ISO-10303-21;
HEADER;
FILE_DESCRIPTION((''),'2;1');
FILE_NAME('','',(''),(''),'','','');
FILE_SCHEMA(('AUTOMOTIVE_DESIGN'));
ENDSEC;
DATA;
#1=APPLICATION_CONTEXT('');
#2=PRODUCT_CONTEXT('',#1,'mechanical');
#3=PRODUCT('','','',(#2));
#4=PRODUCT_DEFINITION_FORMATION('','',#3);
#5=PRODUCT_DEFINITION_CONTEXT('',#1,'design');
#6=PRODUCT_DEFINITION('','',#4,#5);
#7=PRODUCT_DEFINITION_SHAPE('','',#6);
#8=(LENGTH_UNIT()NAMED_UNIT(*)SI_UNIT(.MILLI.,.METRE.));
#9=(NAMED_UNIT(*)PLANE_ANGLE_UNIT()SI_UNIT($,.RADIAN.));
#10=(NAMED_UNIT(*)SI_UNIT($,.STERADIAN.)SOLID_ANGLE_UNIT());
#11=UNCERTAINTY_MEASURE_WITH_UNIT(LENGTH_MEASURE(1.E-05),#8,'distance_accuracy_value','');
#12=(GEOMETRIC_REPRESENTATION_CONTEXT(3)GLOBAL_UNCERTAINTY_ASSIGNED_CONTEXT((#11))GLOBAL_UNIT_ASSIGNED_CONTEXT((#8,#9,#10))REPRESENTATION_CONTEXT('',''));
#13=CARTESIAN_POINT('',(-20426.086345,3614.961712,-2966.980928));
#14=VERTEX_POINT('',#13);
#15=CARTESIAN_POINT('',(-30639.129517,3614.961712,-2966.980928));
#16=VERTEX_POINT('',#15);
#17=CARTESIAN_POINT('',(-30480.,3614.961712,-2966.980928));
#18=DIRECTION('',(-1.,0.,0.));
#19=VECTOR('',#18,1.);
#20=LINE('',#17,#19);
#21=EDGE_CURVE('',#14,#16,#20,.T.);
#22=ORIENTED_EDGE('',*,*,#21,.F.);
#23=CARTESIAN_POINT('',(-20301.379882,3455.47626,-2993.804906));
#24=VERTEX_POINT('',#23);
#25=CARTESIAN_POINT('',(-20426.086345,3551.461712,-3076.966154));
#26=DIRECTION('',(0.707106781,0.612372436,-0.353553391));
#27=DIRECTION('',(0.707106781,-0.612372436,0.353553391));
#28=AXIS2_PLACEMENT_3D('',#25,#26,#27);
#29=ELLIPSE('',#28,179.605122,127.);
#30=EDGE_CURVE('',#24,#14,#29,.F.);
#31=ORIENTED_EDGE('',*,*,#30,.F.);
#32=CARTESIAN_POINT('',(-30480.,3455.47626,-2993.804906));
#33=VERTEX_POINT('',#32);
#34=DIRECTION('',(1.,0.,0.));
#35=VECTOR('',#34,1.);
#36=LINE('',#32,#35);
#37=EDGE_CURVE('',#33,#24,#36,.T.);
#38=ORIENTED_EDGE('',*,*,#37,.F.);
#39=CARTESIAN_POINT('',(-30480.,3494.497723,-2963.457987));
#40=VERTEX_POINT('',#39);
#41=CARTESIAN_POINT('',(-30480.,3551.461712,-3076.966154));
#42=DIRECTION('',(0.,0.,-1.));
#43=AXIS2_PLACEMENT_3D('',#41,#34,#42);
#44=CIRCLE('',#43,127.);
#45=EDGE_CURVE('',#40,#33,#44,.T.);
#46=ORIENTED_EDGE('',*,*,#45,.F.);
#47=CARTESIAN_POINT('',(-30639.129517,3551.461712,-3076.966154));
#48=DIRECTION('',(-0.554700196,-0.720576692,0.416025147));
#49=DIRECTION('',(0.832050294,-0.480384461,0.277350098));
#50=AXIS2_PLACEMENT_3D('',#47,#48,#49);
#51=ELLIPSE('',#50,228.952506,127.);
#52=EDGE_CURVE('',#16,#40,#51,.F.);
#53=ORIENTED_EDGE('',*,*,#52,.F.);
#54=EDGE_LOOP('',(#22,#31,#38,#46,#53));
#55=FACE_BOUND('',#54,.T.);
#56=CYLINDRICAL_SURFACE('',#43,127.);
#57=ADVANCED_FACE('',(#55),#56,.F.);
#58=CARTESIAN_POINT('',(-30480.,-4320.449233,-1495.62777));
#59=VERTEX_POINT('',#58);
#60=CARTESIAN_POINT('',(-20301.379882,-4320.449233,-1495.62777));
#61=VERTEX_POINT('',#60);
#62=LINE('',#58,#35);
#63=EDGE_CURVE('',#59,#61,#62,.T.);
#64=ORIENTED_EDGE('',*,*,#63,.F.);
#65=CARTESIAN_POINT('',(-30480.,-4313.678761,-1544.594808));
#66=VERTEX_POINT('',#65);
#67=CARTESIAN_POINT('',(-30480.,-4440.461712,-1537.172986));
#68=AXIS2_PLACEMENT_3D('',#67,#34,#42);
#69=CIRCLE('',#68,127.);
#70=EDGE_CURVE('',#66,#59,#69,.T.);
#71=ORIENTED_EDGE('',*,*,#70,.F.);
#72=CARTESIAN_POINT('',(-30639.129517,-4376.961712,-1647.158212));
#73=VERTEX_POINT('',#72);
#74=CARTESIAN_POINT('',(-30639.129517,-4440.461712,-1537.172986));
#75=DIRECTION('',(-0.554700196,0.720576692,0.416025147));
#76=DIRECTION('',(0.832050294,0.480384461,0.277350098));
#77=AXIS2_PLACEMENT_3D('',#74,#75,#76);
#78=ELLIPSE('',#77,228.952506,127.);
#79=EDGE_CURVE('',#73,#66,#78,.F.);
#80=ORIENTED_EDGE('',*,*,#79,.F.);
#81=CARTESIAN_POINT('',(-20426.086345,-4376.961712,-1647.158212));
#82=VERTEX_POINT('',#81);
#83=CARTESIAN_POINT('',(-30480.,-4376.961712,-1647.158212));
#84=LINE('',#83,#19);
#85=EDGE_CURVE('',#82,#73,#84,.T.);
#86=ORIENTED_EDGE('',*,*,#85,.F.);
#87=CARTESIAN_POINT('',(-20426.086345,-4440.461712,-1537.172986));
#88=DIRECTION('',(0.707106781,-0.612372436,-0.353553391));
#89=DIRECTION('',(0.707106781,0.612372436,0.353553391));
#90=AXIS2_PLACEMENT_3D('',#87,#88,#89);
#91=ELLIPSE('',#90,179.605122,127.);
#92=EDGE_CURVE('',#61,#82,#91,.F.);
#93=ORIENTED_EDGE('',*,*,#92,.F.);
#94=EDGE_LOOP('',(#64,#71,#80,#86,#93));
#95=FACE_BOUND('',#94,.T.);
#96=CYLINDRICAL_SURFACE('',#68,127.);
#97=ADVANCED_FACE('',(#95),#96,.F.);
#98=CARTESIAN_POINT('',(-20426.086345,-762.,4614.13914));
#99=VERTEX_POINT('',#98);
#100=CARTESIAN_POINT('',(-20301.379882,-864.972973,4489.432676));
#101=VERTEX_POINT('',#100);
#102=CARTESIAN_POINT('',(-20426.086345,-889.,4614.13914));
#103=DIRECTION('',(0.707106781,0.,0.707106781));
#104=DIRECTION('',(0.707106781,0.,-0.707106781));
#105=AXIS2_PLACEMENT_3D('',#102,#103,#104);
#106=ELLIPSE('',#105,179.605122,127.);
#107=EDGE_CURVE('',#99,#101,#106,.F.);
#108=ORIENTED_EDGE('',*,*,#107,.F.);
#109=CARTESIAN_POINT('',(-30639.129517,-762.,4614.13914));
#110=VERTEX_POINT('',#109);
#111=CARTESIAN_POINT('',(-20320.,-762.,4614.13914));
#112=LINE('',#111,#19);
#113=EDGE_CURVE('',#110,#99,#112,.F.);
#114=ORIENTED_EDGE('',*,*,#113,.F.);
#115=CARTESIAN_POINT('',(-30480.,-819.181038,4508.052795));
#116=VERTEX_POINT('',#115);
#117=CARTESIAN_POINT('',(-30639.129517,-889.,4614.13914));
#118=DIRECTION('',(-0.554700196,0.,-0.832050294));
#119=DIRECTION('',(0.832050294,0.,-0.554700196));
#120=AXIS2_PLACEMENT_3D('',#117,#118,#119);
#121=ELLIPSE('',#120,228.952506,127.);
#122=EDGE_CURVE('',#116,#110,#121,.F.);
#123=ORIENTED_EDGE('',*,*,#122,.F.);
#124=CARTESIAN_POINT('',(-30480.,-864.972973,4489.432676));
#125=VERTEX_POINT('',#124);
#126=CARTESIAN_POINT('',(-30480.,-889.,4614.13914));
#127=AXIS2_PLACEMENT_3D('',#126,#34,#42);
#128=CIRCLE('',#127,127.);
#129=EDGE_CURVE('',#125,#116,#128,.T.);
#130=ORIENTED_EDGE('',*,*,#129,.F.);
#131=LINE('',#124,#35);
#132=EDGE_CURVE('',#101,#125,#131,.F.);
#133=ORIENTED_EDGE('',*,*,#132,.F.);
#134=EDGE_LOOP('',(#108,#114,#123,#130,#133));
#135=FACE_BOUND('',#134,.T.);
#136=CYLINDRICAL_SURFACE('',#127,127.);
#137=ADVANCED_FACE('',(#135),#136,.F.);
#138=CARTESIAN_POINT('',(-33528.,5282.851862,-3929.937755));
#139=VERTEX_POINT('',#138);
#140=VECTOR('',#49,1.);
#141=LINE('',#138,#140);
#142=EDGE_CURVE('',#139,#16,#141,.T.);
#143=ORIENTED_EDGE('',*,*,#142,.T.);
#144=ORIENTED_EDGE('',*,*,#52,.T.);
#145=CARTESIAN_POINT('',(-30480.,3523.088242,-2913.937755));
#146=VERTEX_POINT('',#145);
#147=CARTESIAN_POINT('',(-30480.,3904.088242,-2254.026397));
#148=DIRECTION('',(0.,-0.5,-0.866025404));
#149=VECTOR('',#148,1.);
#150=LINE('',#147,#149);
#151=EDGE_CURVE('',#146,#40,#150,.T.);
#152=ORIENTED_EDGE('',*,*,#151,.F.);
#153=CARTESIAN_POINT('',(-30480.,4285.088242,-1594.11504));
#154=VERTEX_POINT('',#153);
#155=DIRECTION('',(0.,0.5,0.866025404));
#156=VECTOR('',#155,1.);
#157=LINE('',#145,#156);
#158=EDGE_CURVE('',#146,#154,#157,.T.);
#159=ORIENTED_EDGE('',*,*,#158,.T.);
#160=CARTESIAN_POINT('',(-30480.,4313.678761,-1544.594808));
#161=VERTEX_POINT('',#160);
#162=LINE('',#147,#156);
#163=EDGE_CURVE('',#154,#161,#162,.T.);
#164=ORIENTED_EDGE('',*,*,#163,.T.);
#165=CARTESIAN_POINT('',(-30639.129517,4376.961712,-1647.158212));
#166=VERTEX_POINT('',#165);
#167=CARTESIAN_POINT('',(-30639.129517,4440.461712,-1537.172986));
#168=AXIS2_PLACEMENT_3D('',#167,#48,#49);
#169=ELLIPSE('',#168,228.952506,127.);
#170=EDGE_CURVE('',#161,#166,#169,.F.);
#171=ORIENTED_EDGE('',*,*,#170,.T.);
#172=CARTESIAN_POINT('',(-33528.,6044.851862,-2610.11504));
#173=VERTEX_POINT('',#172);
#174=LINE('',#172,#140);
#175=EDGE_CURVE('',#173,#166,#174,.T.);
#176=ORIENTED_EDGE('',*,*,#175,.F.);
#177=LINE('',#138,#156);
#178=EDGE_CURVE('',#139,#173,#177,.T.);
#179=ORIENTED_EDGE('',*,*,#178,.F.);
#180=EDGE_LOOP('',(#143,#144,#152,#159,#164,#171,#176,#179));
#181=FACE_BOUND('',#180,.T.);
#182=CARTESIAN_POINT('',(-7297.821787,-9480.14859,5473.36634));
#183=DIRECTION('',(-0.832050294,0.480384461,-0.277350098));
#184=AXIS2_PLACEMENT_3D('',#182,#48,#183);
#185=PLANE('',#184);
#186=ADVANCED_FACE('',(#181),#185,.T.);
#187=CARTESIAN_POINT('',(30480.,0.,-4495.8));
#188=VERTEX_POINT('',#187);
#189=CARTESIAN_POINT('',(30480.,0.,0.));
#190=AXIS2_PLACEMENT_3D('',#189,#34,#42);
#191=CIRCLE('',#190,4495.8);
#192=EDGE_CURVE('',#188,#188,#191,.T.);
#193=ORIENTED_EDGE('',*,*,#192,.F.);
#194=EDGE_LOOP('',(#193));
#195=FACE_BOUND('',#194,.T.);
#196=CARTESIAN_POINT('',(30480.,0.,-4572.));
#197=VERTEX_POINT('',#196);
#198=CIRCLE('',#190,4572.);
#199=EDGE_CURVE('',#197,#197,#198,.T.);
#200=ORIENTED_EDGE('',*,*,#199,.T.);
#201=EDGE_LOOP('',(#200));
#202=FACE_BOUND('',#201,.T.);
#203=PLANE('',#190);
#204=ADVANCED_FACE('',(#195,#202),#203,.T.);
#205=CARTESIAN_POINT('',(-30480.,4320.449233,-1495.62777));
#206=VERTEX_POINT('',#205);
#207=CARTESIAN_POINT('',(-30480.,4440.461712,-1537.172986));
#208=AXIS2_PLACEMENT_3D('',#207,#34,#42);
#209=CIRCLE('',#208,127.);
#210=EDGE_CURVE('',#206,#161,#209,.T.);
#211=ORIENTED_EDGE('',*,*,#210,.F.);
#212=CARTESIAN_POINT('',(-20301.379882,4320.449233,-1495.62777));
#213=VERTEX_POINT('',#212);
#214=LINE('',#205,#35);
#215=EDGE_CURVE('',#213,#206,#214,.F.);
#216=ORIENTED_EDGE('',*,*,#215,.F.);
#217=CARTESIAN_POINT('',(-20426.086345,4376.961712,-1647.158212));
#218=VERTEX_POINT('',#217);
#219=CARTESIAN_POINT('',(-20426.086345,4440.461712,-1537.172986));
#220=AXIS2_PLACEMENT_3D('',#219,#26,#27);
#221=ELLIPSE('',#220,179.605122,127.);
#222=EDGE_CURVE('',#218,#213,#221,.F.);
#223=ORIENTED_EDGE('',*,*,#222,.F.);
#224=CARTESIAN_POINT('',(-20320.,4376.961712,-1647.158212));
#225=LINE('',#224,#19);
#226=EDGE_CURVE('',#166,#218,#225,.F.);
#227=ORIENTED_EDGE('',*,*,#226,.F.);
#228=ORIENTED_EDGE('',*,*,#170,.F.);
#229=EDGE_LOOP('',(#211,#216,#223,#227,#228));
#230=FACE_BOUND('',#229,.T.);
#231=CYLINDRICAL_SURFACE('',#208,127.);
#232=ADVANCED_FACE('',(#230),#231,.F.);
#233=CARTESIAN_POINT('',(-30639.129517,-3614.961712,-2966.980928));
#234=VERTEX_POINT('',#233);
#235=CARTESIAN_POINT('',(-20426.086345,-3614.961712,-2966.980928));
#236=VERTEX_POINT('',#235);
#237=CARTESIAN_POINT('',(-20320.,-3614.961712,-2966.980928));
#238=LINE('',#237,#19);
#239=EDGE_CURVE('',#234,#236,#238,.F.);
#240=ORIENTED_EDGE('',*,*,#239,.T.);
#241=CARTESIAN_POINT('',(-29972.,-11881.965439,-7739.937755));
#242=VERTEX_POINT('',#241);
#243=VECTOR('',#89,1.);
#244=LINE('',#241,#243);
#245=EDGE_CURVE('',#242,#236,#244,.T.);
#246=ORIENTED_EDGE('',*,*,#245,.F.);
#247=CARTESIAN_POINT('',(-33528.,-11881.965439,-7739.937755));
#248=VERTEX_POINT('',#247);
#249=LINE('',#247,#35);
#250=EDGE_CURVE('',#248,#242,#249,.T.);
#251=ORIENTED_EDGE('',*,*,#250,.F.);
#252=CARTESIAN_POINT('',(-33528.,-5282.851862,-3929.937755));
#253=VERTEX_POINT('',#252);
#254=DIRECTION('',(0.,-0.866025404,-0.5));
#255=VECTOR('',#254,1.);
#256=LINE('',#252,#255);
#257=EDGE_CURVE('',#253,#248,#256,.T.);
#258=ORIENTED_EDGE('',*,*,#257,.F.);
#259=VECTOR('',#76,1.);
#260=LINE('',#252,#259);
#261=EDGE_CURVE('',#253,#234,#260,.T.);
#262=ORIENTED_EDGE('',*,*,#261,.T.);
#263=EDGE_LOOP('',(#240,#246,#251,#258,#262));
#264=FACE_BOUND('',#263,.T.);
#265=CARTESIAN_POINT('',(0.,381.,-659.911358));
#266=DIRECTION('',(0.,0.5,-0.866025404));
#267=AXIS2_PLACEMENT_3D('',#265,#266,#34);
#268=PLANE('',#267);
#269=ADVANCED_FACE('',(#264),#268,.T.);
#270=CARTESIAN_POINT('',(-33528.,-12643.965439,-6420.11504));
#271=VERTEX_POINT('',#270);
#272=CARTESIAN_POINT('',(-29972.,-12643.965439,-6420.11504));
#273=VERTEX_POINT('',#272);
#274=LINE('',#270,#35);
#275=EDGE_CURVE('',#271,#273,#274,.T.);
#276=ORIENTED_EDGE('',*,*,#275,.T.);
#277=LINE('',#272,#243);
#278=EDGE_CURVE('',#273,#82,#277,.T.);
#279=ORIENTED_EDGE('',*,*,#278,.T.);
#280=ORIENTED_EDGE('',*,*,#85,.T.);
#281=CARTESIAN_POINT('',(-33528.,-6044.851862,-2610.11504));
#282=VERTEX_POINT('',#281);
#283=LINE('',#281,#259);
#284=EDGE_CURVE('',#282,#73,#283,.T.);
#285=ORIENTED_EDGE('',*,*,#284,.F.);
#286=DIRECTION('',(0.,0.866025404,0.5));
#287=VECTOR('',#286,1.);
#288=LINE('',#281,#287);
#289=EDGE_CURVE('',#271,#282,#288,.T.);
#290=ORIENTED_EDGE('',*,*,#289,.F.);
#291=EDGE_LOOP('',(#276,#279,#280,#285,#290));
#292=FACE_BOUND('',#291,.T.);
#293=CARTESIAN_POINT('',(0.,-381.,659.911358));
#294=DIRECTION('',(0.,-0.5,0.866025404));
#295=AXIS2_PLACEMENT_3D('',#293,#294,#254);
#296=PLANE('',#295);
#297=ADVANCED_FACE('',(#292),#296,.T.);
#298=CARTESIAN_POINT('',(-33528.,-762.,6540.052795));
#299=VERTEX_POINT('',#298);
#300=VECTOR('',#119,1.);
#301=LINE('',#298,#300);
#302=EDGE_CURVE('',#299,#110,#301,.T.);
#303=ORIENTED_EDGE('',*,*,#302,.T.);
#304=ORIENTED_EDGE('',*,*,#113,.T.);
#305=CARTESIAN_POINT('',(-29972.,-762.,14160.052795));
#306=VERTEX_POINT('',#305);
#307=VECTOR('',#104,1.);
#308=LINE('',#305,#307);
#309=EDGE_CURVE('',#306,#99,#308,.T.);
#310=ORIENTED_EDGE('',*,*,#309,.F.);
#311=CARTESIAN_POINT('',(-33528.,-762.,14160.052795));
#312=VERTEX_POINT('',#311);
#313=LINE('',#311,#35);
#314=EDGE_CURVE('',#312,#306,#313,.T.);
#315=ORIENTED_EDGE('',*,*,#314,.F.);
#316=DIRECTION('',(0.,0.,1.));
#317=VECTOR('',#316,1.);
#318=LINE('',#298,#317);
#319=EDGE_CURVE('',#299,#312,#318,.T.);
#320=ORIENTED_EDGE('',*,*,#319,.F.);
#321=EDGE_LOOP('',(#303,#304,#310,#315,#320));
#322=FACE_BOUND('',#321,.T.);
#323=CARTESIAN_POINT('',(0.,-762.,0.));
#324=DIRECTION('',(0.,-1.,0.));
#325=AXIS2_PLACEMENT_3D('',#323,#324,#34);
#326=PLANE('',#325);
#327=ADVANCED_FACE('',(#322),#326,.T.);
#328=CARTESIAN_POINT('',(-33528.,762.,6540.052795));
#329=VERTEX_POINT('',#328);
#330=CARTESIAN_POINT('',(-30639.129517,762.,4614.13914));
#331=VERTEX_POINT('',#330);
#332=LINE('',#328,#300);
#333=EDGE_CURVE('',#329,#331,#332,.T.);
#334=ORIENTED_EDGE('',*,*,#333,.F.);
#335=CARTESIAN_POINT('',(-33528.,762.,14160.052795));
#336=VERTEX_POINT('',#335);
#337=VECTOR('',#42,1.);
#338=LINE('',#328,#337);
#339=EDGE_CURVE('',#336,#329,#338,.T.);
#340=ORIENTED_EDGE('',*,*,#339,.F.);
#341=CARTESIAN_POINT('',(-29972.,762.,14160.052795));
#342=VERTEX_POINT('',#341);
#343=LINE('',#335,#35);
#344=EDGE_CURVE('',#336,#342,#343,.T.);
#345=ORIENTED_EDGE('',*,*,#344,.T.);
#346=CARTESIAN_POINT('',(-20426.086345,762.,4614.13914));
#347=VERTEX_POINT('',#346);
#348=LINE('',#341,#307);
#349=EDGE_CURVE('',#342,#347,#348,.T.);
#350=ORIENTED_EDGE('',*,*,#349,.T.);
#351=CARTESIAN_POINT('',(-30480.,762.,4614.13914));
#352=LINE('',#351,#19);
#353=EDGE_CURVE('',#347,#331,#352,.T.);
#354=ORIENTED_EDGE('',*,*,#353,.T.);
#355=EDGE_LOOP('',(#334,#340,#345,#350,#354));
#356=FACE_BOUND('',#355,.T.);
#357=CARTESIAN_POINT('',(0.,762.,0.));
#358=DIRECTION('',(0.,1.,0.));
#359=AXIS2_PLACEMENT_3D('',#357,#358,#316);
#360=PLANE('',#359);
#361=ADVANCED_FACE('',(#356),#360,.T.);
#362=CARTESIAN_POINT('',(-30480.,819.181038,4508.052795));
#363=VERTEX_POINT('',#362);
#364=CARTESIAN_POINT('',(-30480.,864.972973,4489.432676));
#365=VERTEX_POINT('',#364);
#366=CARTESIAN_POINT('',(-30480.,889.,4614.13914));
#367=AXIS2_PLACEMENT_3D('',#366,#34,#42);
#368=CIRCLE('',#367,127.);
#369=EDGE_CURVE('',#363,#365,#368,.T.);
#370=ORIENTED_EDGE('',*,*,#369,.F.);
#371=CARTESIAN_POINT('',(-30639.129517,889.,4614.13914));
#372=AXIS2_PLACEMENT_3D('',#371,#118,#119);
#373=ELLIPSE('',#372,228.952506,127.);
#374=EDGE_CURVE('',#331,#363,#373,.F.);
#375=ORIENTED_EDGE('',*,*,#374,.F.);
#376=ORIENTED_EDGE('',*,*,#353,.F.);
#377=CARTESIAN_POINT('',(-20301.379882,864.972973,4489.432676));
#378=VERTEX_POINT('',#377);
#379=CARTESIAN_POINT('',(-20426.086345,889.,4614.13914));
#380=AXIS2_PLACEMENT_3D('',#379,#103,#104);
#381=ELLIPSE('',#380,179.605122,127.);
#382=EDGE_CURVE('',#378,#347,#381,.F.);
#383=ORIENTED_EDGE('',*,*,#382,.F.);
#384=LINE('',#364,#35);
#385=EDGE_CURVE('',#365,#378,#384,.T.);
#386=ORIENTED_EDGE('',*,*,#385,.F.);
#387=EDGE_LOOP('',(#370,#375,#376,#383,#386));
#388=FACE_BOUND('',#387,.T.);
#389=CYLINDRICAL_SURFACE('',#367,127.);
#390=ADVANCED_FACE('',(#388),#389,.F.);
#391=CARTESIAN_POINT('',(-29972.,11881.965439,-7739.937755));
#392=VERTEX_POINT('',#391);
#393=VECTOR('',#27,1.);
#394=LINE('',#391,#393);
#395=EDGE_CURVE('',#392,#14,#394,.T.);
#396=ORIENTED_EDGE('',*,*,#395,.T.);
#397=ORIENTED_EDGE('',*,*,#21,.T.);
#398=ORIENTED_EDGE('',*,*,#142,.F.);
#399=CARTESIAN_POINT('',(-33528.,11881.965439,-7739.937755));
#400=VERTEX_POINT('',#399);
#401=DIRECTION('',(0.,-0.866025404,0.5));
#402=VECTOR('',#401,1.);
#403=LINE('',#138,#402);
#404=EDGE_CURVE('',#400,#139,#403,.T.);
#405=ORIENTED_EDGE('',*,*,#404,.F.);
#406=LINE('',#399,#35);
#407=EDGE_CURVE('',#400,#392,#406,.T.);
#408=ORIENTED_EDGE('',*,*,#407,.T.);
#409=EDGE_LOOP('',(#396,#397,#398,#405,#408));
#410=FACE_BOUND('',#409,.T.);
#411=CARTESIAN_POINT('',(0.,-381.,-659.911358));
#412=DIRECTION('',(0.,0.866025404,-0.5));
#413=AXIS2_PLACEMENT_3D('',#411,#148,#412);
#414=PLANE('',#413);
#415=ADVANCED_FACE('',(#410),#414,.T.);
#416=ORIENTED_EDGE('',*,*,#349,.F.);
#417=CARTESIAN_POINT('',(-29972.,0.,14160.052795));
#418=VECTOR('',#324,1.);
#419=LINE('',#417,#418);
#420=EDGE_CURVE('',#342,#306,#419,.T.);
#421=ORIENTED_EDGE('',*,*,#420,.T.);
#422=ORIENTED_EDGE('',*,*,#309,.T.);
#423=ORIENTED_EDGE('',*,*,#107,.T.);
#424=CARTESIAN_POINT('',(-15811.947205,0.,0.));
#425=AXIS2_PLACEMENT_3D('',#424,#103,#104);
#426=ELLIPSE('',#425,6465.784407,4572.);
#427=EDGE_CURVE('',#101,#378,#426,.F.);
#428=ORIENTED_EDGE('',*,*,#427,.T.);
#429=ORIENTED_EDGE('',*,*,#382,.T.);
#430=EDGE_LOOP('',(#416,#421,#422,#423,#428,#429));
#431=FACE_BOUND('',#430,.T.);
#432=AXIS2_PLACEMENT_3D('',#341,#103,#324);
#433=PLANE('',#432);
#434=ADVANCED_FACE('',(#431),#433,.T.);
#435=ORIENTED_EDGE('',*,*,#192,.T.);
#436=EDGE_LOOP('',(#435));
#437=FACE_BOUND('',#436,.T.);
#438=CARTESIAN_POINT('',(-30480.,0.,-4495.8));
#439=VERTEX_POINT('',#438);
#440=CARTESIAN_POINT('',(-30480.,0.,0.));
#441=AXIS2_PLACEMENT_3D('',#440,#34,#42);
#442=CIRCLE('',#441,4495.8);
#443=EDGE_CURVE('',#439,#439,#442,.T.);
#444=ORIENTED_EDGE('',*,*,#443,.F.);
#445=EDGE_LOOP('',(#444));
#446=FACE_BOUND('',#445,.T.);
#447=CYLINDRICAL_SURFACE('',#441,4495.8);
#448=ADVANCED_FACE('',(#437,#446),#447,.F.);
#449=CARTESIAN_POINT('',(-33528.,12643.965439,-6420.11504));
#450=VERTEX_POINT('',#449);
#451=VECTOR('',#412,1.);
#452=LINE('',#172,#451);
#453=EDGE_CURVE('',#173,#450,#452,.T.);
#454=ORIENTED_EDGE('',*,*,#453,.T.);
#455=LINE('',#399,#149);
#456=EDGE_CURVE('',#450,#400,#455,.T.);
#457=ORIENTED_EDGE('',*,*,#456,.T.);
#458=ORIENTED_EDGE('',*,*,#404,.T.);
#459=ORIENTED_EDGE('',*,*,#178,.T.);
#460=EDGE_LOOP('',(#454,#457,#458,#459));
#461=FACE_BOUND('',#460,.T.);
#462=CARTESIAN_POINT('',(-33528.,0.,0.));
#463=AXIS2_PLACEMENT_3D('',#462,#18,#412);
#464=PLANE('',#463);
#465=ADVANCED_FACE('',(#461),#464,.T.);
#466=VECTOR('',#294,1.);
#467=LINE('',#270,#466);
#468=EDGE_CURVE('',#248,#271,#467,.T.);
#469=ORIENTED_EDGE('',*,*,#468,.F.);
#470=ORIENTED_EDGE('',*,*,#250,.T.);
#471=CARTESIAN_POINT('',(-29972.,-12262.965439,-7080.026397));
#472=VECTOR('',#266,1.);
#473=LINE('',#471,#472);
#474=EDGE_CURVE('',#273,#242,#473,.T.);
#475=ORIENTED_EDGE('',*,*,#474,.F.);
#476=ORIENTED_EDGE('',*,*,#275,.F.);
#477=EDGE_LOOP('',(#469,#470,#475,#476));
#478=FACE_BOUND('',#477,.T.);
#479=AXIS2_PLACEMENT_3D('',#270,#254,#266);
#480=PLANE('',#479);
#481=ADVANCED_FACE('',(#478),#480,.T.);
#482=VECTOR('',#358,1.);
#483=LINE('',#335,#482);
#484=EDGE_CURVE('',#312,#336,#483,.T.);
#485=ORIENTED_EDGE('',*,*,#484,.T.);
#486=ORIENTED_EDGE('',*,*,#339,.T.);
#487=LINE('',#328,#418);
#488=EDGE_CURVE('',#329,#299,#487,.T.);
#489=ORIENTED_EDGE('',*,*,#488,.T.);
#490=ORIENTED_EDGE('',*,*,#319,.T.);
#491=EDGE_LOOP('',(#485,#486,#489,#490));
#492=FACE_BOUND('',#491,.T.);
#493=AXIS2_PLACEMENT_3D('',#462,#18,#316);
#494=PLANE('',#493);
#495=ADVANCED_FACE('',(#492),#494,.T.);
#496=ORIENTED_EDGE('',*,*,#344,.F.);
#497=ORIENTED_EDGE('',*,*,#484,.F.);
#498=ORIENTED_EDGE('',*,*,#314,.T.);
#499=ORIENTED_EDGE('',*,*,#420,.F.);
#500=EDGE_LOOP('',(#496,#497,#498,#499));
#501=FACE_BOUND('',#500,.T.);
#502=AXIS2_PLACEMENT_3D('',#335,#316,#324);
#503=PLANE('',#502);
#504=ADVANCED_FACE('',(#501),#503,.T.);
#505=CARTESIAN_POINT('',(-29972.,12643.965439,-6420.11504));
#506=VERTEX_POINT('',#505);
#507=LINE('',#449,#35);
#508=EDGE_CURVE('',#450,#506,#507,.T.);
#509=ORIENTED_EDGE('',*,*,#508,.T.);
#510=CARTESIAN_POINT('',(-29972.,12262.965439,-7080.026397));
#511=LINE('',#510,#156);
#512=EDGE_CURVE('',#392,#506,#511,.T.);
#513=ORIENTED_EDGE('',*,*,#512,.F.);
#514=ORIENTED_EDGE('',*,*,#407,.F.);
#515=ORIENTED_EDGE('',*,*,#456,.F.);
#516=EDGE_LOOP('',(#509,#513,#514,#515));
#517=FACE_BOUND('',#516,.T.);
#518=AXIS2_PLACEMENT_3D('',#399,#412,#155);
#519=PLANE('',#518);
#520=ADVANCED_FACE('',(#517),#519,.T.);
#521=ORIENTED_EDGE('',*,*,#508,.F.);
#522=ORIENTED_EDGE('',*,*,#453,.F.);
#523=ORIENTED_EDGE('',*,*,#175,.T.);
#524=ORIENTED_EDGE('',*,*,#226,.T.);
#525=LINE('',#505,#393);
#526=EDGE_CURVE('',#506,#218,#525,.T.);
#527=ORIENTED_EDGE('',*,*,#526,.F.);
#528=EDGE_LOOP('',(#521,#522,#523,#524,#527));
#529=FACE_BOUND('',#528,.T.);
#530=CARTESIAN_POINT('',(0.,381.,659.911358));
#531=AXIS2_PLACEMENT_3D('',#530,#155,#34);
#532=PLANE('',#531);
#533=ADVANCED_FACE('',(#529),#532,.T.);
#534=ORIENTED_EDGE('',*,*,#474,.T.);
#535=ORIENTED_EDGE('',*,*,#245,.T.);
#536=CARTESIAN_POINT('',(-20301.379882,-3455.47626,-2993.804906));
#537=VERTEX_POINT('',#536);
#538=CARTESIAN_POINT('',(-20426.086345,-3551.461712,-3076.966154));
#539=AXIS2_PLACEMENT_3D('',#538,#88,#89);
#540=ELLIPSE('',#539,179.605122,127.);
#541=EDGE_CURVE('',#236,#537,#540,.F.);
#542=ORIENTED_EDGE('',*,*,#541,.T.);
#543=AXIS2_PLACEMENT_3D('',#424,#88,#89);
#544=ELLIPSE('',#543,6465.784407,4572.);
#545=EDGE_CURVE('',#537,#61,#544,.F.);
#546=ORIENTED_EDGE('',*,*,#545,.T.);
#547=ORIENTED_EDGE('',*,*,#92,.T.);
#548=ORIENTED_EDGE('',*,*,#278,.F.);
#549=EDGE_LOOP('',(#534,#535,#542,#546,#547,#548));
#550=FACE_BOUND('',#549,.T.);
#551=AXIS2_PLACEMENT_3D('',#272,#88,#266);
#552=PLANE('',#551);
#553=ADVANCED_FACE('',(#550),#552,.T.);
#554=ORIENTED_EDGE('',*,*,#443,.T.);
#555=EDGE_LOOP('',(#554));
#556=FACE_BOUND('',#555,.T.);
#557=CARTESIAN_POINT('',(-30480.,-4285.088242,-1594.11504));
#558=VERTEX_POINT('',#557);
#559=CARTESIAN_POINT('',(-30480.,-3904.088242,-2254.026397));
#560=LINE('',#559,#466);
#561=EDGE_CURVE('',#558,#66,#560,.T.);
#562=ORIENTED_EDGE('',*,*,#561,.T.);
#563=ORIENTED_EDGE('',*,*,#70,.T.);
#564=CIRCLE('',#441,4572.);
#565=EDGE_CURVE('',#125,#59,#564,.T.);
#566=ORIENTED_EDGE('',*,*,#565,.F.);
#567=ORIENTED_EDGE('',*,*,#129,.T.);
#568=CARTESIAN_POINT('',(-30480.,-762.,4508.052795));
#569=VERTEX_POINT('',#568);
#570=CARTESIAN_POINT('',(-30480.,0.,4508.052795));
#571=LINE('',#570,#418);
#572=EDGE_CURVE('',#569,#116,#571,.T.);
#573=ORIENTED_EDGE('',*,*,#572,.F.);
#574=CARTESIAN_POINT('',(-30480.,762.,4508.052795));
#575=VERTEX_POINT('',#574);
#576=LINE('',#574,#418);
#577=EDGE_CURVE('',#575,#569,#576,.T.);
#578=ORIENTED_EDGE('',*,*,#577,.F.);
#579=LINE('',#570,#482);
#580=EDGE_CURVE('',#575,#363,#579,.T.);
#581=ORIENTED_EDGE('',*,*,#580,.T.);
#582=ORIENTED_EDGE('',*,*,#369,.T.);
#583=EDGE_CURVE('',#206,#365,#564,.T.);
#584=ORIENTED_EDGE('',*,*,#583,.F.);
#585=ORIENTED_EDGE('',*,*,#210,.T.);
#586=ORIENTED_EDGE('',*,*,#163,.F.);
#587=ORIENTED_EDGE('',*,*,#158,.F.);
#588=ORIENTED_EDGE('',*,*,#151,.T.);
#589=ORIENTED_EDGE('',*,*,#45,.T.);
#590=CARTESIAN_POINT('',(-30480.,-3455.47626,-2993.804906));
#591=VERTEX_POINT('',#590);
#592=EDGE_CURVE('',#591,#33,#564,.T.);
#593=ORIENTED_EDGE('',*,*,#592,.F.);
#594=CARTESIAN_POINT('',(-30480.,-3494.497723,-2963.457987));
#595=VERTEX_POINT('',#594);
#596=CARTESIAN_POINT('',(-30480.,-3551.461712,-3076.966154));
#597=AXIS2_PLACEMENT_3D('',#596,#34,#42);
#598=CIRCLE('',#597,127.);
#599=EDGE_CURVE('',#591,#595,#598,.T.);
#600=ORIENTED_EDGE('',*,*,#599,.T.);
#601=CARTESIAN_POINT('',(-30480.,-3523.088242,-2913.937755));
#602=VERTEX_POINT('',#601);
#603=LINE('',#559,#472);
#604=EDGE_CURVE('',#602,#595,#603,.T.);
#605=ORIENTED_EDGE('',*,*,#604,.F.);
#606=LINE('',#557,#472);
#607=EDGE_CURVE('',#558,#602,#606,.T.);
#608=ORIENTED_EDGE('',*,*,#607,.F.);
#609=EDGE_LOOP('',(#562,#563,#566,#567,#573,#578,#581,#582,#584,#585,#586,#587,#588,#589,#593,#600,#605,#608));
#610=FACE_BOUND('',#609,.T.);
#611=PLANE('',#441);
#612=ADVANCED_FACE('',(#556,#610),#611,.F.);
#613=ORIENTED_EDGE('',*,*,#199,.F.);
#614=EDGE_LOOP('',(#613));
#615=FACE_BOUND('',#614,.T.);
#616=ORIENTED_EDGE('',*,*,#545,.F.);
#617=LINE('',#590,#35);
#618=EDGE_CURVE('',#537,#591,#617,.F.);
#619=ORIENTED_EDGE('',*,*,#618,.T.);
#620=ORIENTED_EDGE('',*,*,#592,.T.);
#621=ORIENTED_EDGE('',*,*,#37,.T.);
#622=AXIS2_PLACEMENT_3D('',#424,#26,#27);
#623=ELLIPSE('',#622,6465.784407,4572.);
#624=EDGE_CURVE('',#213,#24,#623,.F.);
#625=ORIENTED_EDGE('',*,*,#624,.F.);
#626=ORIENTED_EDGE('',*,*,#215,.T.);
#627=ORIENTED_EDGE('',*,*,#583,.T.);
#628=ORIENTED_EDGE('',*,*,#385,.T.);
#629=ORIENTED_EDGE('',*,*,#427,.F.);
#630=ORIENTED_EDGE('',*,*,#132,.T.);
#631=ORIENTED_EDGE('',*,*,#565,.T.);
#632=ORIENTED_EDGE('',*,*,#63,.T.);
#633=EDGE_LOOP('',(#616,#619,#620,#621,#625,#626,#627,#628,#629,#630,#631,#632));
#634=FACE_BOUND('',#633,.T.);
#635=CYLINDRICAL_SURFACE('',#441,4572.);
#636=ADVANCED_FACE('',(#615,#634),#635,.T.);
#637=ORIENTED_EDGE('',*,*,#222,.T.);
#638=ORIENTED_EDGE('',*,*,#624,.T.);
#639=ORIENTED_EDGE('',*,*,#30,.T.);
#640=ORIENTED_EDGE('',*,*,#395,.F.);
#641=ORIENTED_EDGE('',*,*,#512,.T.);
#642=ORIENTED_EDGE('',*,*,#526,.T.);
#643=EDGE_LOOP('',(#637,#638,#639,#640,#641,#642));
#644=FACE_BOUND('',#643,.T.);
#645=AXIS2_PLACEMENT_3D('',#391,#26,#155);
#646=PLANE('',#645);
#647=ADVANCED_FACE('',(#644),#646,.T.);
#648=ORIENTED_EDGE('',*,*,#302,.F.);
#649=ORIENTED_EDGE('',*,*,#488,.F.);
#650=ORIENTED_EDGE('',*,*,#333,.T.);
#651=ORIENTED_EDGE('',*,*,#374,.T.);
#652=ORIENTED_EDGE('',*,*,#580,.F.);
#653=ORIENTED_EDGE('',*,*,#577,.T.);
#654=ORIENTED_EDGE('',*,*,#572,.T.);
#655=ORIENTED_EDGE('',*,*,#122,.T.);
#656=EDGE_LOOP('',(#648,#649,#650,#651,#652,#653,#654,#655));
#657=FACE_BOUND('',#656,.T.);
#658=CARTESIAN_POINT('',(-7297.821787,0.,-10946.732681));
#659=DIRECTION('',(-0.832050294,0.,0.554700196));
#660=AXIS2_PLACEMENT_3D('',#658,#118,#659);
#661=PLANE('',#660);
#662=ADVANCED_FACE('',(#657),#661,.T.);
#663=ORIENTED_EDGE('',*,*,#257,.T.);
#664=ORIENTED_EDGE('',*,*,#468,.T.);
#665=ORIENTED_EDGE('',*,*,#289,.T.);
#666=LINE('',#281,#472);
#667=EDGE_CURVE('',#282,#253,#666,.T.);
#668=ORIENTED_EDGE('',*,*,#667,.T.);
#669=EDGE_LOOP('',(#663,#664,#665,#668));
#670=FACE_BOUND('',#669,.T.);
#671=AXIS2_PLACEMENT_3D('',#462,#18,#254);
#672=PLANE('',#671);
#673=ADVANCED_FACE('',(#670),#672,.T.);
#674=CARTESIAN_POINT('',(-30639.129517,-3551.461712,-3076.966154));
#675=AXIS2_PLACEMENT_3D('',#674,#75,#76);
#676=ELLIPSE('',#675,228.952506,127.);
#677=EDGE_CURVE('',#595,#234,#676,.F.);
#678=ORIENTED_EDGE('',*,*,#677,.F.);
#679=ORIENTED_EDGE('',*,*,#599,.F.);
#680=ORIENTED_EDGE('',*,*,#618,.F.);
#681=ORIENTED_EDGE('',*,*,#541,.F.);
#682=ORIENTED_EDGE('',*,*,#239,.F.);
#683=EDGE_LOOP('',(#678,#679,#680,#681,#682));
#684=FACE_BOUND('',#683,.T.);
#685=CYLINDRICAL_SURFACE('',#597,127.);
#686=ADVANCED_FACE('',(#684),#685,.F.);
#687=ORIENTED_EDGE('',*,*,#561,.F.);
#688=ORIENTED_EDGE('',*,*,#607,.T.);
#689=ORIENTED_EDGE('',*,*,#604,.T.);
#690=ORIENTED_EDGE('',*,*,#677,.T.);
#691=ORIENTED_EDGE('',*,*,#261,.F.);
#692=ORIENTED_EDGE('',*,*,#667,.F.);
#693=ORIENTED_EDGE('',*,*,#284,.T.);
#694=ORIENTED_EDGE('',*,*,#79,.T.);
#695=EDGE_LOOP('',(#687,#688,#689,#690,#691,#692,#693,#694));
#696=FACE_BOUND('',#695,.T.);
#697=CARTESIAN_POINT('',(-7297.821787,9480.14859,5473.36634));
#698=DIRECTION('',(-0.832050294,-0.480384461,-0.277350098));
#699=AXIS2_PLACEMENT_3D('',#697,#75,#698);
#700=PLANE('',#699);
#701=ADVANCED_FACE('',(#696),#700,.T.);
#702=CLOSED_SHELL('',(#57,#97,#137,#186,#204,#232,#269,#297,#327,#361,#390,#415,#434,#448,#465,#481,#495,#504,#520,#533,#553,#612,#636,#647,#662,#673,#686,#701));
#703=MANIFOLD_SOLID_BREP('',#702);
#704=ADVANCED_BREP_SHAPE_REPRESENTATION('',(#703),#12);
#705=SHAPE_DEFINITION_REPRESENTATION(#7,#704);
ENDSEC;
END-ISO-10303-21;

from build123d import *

# Parameters (mm, degrees)
BOSS_EXTRUDE1_DEPTH      = 30480
BOSS_EXTRUDE1_DEPTH_BACK = 30480
SKETCH1_R                = 4572
SHELL1_T                 = -76.2
LOFT2_START              = -762
LOFT2_DEPTH              = 1524
FILLET1_R                = 127
CIRPATTERN1_COUNT        = 3
FILLET1_OF_CIRPATTERN1_R = 127


# Read off the part's stored shape, not the designer's step: Loft2
with BuildPart() as part:
    # Sketch1 → Boss-Extrude1 (new, two sides: drawn at the far end of the back side and taken through both)
    with BuildSketch(Plane(origin=(0, 0, 0), x_dir=(0, 0, -1), z_dir=(1, 0, 0)).offset(-BOSS_EXTRUDE1_DEPTH_BACK)):
        Circle(SKETCH1_R)
    extrude(amount=BOSS_EXTRUDE1_DEPTH + BOSS_EXTRUDE1_DEPTH_BACK)

    # Shell1
    shell1_openings = [part.faces().sort_by_distance(p)[0] for p in [
        (-30480, 0, 0),
        (30480, 0, 0),
    ]]
    offset(amount=SHELL1_T, openings=shell1_openings, kind=Kind.INTERSECTION)

    # Loft2 outline → Loft2 (add)
    with BuildSketch(Plane(origin=(0, 0, 0), x_dir=(1, 0, 0), z_dir=(0, 1, 0)).offset(LOFT2_START)):
        Polygon((-30478.420807917, -4507), (-33528, -6540.052794722), (-33528, -14160.052794722), (-29972, -14160.052794722), (-20318.947205278, -4507), align=None)
    loft2 = extrude(amount=LOFT2_DEPTH)

    # Fillet1
    # the kernel refuses this fillet: 127 mm, written as the material it adds along each edge
    with BuildSketch(Plane(origin=(-30745.215862307, 762, 4508.052794722), x_dir=(0, 0.9840414147079701, -0.1779395800251785), z_dir=(1, 0, 0))) as fillet1_piece_1_section:
        with BuildLine():
            CenterArc((106.096300006, 126.991683602), FILLET1_R, 190.249769112, 79.094530003)
            Line((-18.876959662, 104.393356939), (0, 0))
            ThreePointArc((0, 0), (52.321463017, 0.299390324), (104.642926033, 0))
        make_face()
    fillet1_piece_1 = extrude(amount=10690.431724613, mode=Mode.PRIVATE)
    fillet1_piece_1 = split(fillet1_piece_1, bisect_by=Plane(origin=(-30480, 769.527173965, 4556.423529059), z_dir=(-1, 0, 0)), keep=Keep.TOP, mode=Mode.PRIVATE)
    fillet1_piece_1 = split(fillet1_piece_1, bisect_by=Plane(origin=(-30527.440527907, 769.527173965, 4539.679813327), z_dir=(0.5547001962252289, 0, 0.8320502943378439)), keep=Keep.TOP, mode=Mode.PRIVATE)
    add(fillet1_piece_1)
    with BuildSketch(Plane(origin=(-30480, 762, 4508.052794722), x_dir=(0, 0.9840414147079701, -0.17793958002517812), z_dir=(1, 0, 0))) as fillet1_piece_2_section:
        with BuildLine():
            CenterArc((106.096300006, 126.991683602), FILLET1_R, 190.249769112, 79.094530003)
            Line((-18.876959662, 104.393356939), (0, 0))
            ThreePointArc((0, 0), (52.321463017, 0.299390324), (104.642926033, 0))
        make_face()
    fillet1_piece_2 = extrude(amount=10425.215862307, mode=Mode.PRIVATE)
    fillet1_piece_2 = split(fillet1_piece_2, bisect_by=Plane(origin=(-30469.277434704, 825.457396933, 4500.904417858), z_dir=(-0.5547001962252289, 0, -0.8320502943378439)), keep=Keep.TOP, mode=Mode.PRIVATE)
    add(fillet1_piece_2)
    with BuildSketch(Plane(origin=(-30480, 762, 4508.052794722), x_dir=(0, 0.9840414147079701, -0.17793958002517812), z_dir=(1, 0, 0))) as fillet1_piece_3_section:
        with BuildLine():
            CenterArc((106.096300006, 126.991683602), FILLET1_R, 190.249769112, 79.094530003)
            Line((-18.876959662, 104.393356939), (0, 0))
            ThreePointArc((0, 0), (52.321463017, 0.299390324), (104.642926033, 0))
        make_face()
    fillet1_piece_3 = extrude(amount=10425.215862307, mode=Mode.PRIVATE)
    fillet1_piece_3 = split(fillet1_piece_3, bisect_by=Plane(origin=(-22874.041619901, 784.931098552, 7062.094414623), z_dir=(-0.7071067811865476, 0, -0.7071067811865476)), keep=Keep.TOP, mode=Mode.PRIVATE)
    fillet1_piece_3 = split(fillet1_piece_3, bisect_by=Plane(origin=(-26977.987627207, 784.931098552, 2173.377879526), z_dir=(0.5547001962252289, 0, 0.8320502943378439)), keep=Keep.TOP, mode=Mode.PRIVATE)
    add(fillet1_piece_3)
    with BuildSketch(Plane(origin=(-30745.215862307, -762, 4508.052794722), x_dir=(0, -0.9840414147079707, -0.17793958002517546), z_dir=(1, 0, 0))) as fillet1_piece_4_section:
        with BuildLine():
            CenterArc((106.096300006, -126.991683602), FILLET1_R, 90.655700885, 79.094530003)
            Line((-18.876959662, -104.393356939), (0, 0))
            ThreePointArc((0, 0), (52.321463017, -0.299390324), (104.642926033, 0))
        make_face()
    fillet1_piece_4 = extrude(amount=10690.431724613, mode=Mode.PRIVATE)
    fillet1_piece_4 = split(fillet1_piece_4, bisect_by=Plane(origin=(-30480, -769.527173965, 4556.423529059), z_dir=(-1, 0, 0)), keep=Keep.TOP, mode=Mode.PRIVATE)
    fillet1_piece_4 = split(fillet1_piece_4, bisect_by=Plane(origin=(-30527.440527907, -769.527173965, 4539.679813327), z_dir=(0.5547001962252289, 0, 0.8320502943378439)), keep=Keep.TOP, mode=Mode.PRIVATE)
    add(fillet1_piece_4)
    with BuildSketch(Plane(origin=(-30480, -762, 4508.052794722), x_dir=(0, -0.9840414147079704, -0.1779395800251768), z_dir=(1, 0, 0))) as fillet1_piece_5_section:
        with BuildLine():
            CenterArc((106.096300006, -126.991683602), FILLET1_R, 90.655700885, 79.094530003)
            Line((-18.876959662, -104.393356939), (0, 0))
            ThreePointArc((0, 0), (52.321463017, -0.299390324), (104.642926033, 0))
        make_face()
    fillet1_piece_5 = extrude(amount=10425.215862307, mode=Mode.PRIVATE)
    fillet1_piece_5 = split(fillet1_piece_5, bisect_by=Plane(origin=(-30469.277434704, -825.457396933, 4500.904417858), z_dir=(-0.5547001962252289, 0, -0.8320502943378439)), keep=Keep.TOP, mode=Mode.PRIVATE)
    add(fillet1_piece_5)
    with BuildSketch(Plane(origin=(-30480, -762, 4508.052794722), x_dir=(0, -0.9840414147079704, -0.1779395800251768), z_dir=(1, 0, 0))) as fillet1_piece_6_section:
        with BuildLine():
            CenterArc((106.096300006, -126.991683602), FILLET1_R, 90.655700885, 79.094530003)
            Line((-18.876959662, -104.393356939), (0, 0))
            ThreePointArc((0, 0), (52.321463017, -0.299390324), (104.642926033, 0))
        make_face()
    fillet1_piece_6 = extrude(amount=10425.215862307, mode=Mode.PRIVATE)
    fillet1_piece_6 = split(fillet1_piece_6, bisect_by=Plane(origin=(-22874.041619901, -784.931098552, 7062.094414623), z_dir=(-0.7071067811865476, 0, -0.7071067811865476)), keep=Keep.TOP, mode=Mode.PRIVATE)
    fillet1_piece_6 = split(fillet1_piece_6, bisect_by=Plane(origin=(-26977.987627207, -784.931098552, 2173.377879526), z_dir=(0.5547001962252289, 0, 0.8320502943378439)), keep=Keep.TOP, mode=Mode.PRIVATE)
    add(fillet1_piece_6)

    # CirPattern1: Loft2 ×3 about axis
    cirpattern1_axis = Axis((0, 0, 0), (1, 0, 0))
    for i in range(1, CIRPATTERN1_COUNT):
        add(loft2.rotate(cirpattern1_axis, i * 360 / CIRPATTERN1_COUNT))

    # Fillet1 of CirPattern1
    # the kernel refuses this fillet: 127 mm, written as the material it adds along each edge
    with BuildSketch(Plane(origin=(-20054.784137693, -4285.088241831, -1594.115039677), x_dir=(0, -0.33792051071345414, 0.9411746535256664), z_dir=(-1, 0, 0))) as fillet1_of_cirpattern1_piece_1_section:
        with BuildLine():
            CenterArc((106.096300006, -126.991683602), FILLET1_OF_CIRPATTERN1_R, 90.655700885, 79.094530003)
            Line((-18.876959662, -104.393356939), (0, 0))
            ThreePointArc((0, 0), (52.321463017, -0.299390324), (104.642926033, 0))
        make_face()
    fillet1_of_cirpattern1_piece_1 = extrude(amount=10425.215862307, mode=Mode.PRIVATE)
    fillet1_of_cirpattern1_piece_1 = split(fillet1_of_cirpattern1_piece_1, bisect_by=Plane(origin=(-22874.041619902, -6508.418716264, -2851.276935745), z_dir=(-0.7071067811865476, 0.6123724356957947, 0.3535533905932737)), keep=Keep.TOP, mode=Mode.PRIVATE)
    fillet1_of_cirpattern1_piece_1 = split(fillet1_of_cirpattern1_piece_1, bisect_by=Plane(origin=(-26977.987627207, -2274.666004969, -406.918668197), z_dir=(0.5547001962252289, -0.7205766921228924, -0.41602514716892186)), keep=Keep.TOP, mode=Mode.PRIVATE)
    add(fillet1_of_cirpattern1_piece_1)
    with BuildSketch(Plane(origin=(-20054.784137693, -4285.088241831, -1594.115039677), x_dir=(0, -0.33792051071345414, 0.9411746535256664), z_dir=(-1, 0, 0))) as fillet1_of_cirpattern1_piece_2_section:
        with BuildLine():
            CenterArc((106.096300006, -126.991683602), FILLET1_OF_CIRPATTERN1_R, 90.655700885, 79.094530003)
            Line((-18.876959662, -104.393356939), (0, 0))
            ThreePointArc((0, 0), (52.321463017, -0.299390324), (104.642926033, 0))
        make_face()
    fillet1_of_cirpattern1_piece_2 = extrude(amount=10690.431724613, mode=Mode.PRIVATE)
    fillet1_of_cirpattern1_piece_2 = split(fillet1_of_cirpattern1_piece_2, bisect_by=Plane(origin=(-30480, -4330.742113549, -1611.781682973), z_dir=(-1, 0, 0)), keep=Keep.TOP, mode=Mode.PRIVATE)
    fillet1_of_cirpattern1_piece_2 = split(fillet1_of_cirpattern1_piece_2, bisect_by=Plane(origin=(-30527.440527907, -4316.241630371, -1603.409825107), z_dir=(0.5547001962252289, -0.7205766921228924, -0.41602514716892186)), keep=Keep.TOP, mode=Mode.PRIVATE)
    add(fillet1_of_cirpattern1_piece_2)
    with BuildSketch(Plane(origin=(-20054.784137693, -4285.088241831, -1594.115039677), x_dir=(0, -0.33792051071345414, 0.9411746535256664), z_dir=(-1, 0, 0))) as fillet1_of_cirpattern1_piece_3_section:
        with BuildLine():
            CenterArc((106.096300006, -126.991683602), FILLET1_OF_CIRPATTERN1_R, 90.655700885, 79.094530003)
            Line((-18.876959662, -104.393356939), (0, 0))
            ThreePointArc((0, 0), (52.321463017, -0.299390324), (104.642926033, 0))
        make_face()
    fillet1_of_cirpattern1_piece_3 = extrude(amount=10425.215862307, mode=Mode.PRIVATE)
    fillet1_of_cirpattern1_piece_3 = split(fillet1_of_cirpattern1_piece_3, bisect_by=Plane(origin=(-30469.277434703, -4310.626264337, -1535.585133443), z_dir=(-0.5547001962252289, 0.7205766921228924, 0.41602514716892186)), keep=Keep.TOP, mode=Mode.PRIVATE)
    add(fillet1_of_cirpattern1_piece_3)
    with BuildSketch(Plane(origin=(-20054.784137693, -3523.088241831, -2913.937755045), x_dir=(0, 0.646120903994517, -0.7632350735004965), z_dir=(-1, 0, 0))) as fillet1_of_cirpattern1_piece_4_section:
        with BuildLine():
            CenterArc((106.096300006, 126.991683602), FILLET1_OF_CIRPATTERN1_R, 190.249769112, 79.094530003)
            Line((-18.876959662, 104.393356939), (0, 0))
            ThreePointArc((0, 0), (52.321463017, 0.299390324), (104.642926033, 0))
        make_face()
    fillet1_of_cirpattern1_piece_4 = extrude(amount=10425.215862307, mode=Mode.PRIVATE)
    fillet1_of_cirpattern1_piece_4 = split(fillet1_of_cirpattern1_piece_4, bisect_by=Plane(origin=(-22874.041619901, -5723.487617712, -4210.817478878), z_dir=(-0.7071067811865476, 0.6123724356957947, 0.3535533905932737)), keep=Keep.TOP, mode=Mode.PRIVATE)
    fillet1_of_cirpattern1_piece_4 = split(fillet1_of_cirpattern1_piece_4, bisect_by=Plane(origin=(-26977.987627206, -1489.734906417, -1766.45921133), z_dir=(0.5547001962252289, -0.7205766921228924, -0.41602514716892186)), keep=Keep.TOP, mode=Mode.PRIVATE)
    add(fillet1_of_cirpattern1_piece_4)
    with BuildSketch(Plane(origin=(-20054.784137693, -3523.088241831, -2913.937755045), x_dir=(0, 0.646120903994517, -0.7632350735004965), z_dir=(-1, 0, 0))) as fillet1_of_cirpattern1_piece_5_section:
        with BuildLine():
            CenterArc((106.096300006, 126.991683602), FILLET1_OF_CIRPATTERN1_R, 190.249769112, 79.094530003)
            Line((-18.876959662, 104.393356939), (0, 0))
            ThreePointArc((0, 0), (52.321463017, 0.299390324), (104.642926033, 0))
        make_face()
    fillet1_of_cirpattern1_piece_5 = extrude(amount=10690.431724613, mode=Mode.PRIVATE)
    fillet1_of_cirpattern1_piece_5 = split(fillet1_of_cirpattern1_piece_5, bisect_by=Plane(origin=(-30480, -3561.214939584, -2944.641846085), z_dir=(-1, 0, 0)), keep=Keep.TOP, mode=Mode.PRIVATE)
    fillet1_of_cirpattern1_piece_5 = split(fillet1_of_cirpattern1_piece_5, bisect_by=Plane(origin=(-30527.440527907, -3546.714456406, -2936.269988219), z_dir=(0.5547001962252289, -0.7205766921228924, -0.41602514716892186)), keep=Keep.TOP, mode=Mode.PRIVATE)
    add(fillet1_of_cirpattern1_piece_5)
    with BuildSketch(Plane(origin=(-20054.784137693, -3523.088241831, -2913.937755045), x_dir=(0, 0.646120903994517, -0.7632350735004965), z_dir=(-1, 0, 0))) as fillet1_of_cirpattern1_piece_6_section:
        with BuildLine():
            CenterArc((106.096300006, 126.991683602), FILLET1_OF_CIRPATTERN1_R, 190.249769112, 79.094530003)
            Line((-18.876959662, 104.393356939), (0, 0))
            ThreePointArc((0, 0), (52.321463017, 0.299390324), (104.642926033, 0))
        make_face()
    fillet1_of_cirpattern1_piece_6 = extrude(amount=10425.215862307, mode=Mode.PRIVATE)
    fillet1_of_cirpattern1_piece_6 = split(fillet1_of_cirpattern1_piece_6, bisect_by=Plane(origin=(-30469.277434703, -3485.168867404, -2965.319284414), z_dir=(-0.5547001962252289, 0.7205766921228924, 0.41602514716892186)), keep=Keep.TOP, mode=Mode.PRIVATE)
    add(fillet1_of_cirpattern1_piece_6)
    with BuildSketch(Plane(origin=(-20054.784137693, 3523.088241831, -2913.937755045), x_dir=(0, -0.6461209039945224, -0.7632350735004917), z_dir=(-1, 0, 0))) as fillet1_of_cirpattern1_piece_7_section:
        with BuildLine():
            CenterArc((106.096300006, -126.991683602), FILLET1_OF_CIRPATTERN1_R, 90.655700885, 79.094530003)
            Line((-18.876959662, -104.393356939), (0, 0))
            ThreePointArc((0, 0), (52.321463017, -0.299390324), (104.642926033, 0))
        make_face()
    fillet1_of_cirpattern1_piece_7 = extrude(amount=10425.215862307, mode=Mode.PRIVATE)
    fillet1_of_cirpattern1_piece_7 = split(fillet1_of_cirpattern1_piece_7, bisect_by=Plane(origin=(-22874.041619902, 5723.487617712, -4210.817478878), z_dir=(-0.7071067811865476, -0.6123724356957944, 0.3535533905932741)), keep=Keep.TOP, mode=Mode.PRIVATE)
    fillet1_of_cirpattern1_piece_7 = split(fillet1_of_cirpattern1_piece_7, bisect_by=Plane(origin=(-26977.987627207, 1489.734906417, -1766.45921133), z_dir=(0.5547001962252289, 0.7205766921228921, -0.41602514716892236)), keep=Keep.TOP, mode=Mode.PRIVATE)
    add(fillet1_of_cirpattern1_piece_7)
    with BuildSketch(Plane(origin=(-20054.784137693, 3523.088241831, -2913.937755045), x_dir=(0, -0.6461209039945224, -0.7632350735004917), z_dir=(-1, 0, 0))) as fillet1_of_cirpattern1_piece_8_section:
        with BuildLine():
            CenterArc((106.096300006, -126.991683602), FILLET1_OF_CIRPATTERN1_R, 90.655700885, 79.094530003)
            Line((-18.876959662, -104.393356939), (0, 0))
            ThreePointArc((0, 0), (52.321463017, -0.299390324), (104.642926033, 0))
        make_face()
    fillet1_of_cirpattern1_piece_8 = extrude(amount=10690.431724613, mode=Mode.PRIVATE)
    fillet1_of_cirpattern1_piece_8 = split(fillet1_of_cirpattern1_piece_8, bisect_by=Plane(origin=(-30480, 3561.214939584, -2944.641846085), z_dir=(-1, 0, 0)), keep=Keep.TOP, mode=Mode.PRIVATE)
    fillet1_of_cirpattern1_piece_8 = split(fillet1_of_cirpattern1_piece_8, bisect_by=Plane(origin=(-30527.440527907, 3546.714456406, -2936.269988219), z_dir=(0.5547001962252289, 0.7205766921228921, -0.41602514716892236)), keep=Keep.TOP, mode=Mode.PRIVATE)
    add(fillet1_of_cirpattern1_piece_8)
    with BuildSketch(Plane(origin=(-20054.784137693, 3523.088241831, -2913.937755045), x_dir=(0, -0.6461209039945224, -0.7632350735004917), z_dir=(-1, 0, 0))) as fillet1_of_cirpattern1_piece_9_section:
        with BuildLine():
            CenterArc((106.096300006, -126.991683602), FILLET1_OF_CIRPATTERN1_R, 90.655700885, 79.094530003)
            Line((-18.876959662, -104.393356939), (0, 0))
            ThreePointArc((0, 0), (52.321463017, -0.299390324), (104.642926033, 0))
        make_face()
    fillet1_of_cirpattern1_piece_9 = extrude(amount=10425.215862307, mode=Mode.PRIVATE)
    fillet1_of_cirpattern1_piece_9 = split(fillet1_of_cirpattern1_piece_9, bisect_by=Plane(origin=(-30469.277434703, 3485.168867404, -2965.319284414), z_dir=(-0.5547001962252289, -0.7205766921228921, 0.41602514716892236)), keep=Keep.TOP, mode=Mode.PRIVATE)
    add(fillet1_of_cirpattern1_piece_9)
    with BuildSketch(Plane(origin=(-20054.784137693, 4285.088241831, -1594.115039677), x_dir=(0, 0.33792051071345486, 0.9411746535256663), z_dir=(-1, 0, 0))) as fillet1_of_cirpattern1_piece_10_section:
        with BuildLine():
            CenterArc((106.096300006, 126.991683602), FILLET1_OF_CIRPATTERN1_R, 190.249769112, 79.094530003)
            Line((-18.876959662, 104.393356939), (0, 0))
            ThreePointArc((0, 0), (52.321463017, 0.299390324), (104.642926033, 0))
        make_face()
    fillet1_of_cirpattern1_piece_10 = extrude(amount=10425.215862307, mode=Mode.PRIVATE)
    fillet1_of_cirpattern1_piece_10 = split(fillet1_of_cirpattern1_piece_10, bisect_by=Plane(origin=(-22874.041619901, 6508.418716264, -2851.276935745), z_dir=(-0.7071067811865476, -0.6123724356957944, 0.3535533905932741)), keep=Keep.TOP, mode=Mode.PRIVATE)
    fillet1_of_cirpattern1_piece_10 = split(fillet1_of_cirpattern1_piece_10, bisect_by=Plane(origin=(-26977.987627207, 2274.666004969, -406.918668197), z_dir=(0.5547001962252289, 0.7205766921228921, -0.41602514716892236)), keep=Keep.TOP, mode=Mode.PRIVATE)
    add(fillet1_of_cirpattern1_piece_10)
    with BuildSketch(Plane(origin=(-20054.784137693, 4285.088241831, -1594.115039677), x_dir=(0, 0.33792051071345486, 0.9411746535256663), z_dir=(-1, 0, 0))) as fillet1_of_cirpattern1_piece_11_section:
        with BuildLine():
            CenterArc((106.096300006, 126.991683602), FILLET1_OF_CIRPATTERN1_R, 190.249769112, 79.094530003)
            Line((-18.876959662, 104.393356939), (0, 0))
            ThreePointArc((0, 0), (52.321463017, 0.299390324), (104.642926033, 0))
        make_face()
    fillet1_of_cirpattern1_piece_11 = extrude(amount=10690.431724613, mode=Mode.PRIVATE)
    fillet1_of_cirpattern1_piece_11 = split(fillet1_of_cirpattern1_piece_11, bisect_by=Plane(origin=(-30480, 4330.742113549, -1611.781682973), z_dir=(-1, 0, 0)), keep=Keep.TOP, mode=Mode.PRIVATE)
    fillet1_of_cirpattern1_piece_11 = split(fillet1_of_cirpattern1_piece_11, bisect_by=Plane(origin=(-30527.440527907, 4316.241630371, -1603.409825107), z_dir=(0.5547001962252289, 0.7205766921228921, -0.41602514716892236)), keep=Keep.TOP, mode=Mode.PRIVATE)
    add(fillet1_of_cirpattern1_piece_11)
    with BuildSketch(Plane(origin=(-20054.784137693, 4285.088241831, -1594.115039677), x_dir=(0, 0.33792051071345486, 0.9411746535256663), z_dir=(-1, 0, 0))) as fillet1_of_cirpattern1_piece_12_section:
        with BuildLine():
            CenterArc((106.096300006, 126.991683602), FILLET1_OF_CIRPATTERN1_R, 190.249769112, 79.094530003)
            Line((-18.876959662, 104.393356939), (0, 0))
            ThreePointArc((0, 0), (52.321463017, 0.299390324), (104.642926033, 0))
        make_face()
    fillet1_of_cirpattern1_piece_12 = extrude(amount=10425.215862307, mode=Mode.PRIVATE)
    fillet1_of_cirpattern1_piece_12 = split(fillet1_of_cirpattern1_piece_12, bisect_by=Plane(origin=(-30469.277434703, 4310.626264337, -1535.585133443), z_dir=(-0.5547001962252289, -0.7205766921228921, 0.41602514716892236)), keep=Keep.TOP, mode=Mode.PRIVATE)
    add(fillet1_of_cirpattern1_piece_12)


solid = part.part
